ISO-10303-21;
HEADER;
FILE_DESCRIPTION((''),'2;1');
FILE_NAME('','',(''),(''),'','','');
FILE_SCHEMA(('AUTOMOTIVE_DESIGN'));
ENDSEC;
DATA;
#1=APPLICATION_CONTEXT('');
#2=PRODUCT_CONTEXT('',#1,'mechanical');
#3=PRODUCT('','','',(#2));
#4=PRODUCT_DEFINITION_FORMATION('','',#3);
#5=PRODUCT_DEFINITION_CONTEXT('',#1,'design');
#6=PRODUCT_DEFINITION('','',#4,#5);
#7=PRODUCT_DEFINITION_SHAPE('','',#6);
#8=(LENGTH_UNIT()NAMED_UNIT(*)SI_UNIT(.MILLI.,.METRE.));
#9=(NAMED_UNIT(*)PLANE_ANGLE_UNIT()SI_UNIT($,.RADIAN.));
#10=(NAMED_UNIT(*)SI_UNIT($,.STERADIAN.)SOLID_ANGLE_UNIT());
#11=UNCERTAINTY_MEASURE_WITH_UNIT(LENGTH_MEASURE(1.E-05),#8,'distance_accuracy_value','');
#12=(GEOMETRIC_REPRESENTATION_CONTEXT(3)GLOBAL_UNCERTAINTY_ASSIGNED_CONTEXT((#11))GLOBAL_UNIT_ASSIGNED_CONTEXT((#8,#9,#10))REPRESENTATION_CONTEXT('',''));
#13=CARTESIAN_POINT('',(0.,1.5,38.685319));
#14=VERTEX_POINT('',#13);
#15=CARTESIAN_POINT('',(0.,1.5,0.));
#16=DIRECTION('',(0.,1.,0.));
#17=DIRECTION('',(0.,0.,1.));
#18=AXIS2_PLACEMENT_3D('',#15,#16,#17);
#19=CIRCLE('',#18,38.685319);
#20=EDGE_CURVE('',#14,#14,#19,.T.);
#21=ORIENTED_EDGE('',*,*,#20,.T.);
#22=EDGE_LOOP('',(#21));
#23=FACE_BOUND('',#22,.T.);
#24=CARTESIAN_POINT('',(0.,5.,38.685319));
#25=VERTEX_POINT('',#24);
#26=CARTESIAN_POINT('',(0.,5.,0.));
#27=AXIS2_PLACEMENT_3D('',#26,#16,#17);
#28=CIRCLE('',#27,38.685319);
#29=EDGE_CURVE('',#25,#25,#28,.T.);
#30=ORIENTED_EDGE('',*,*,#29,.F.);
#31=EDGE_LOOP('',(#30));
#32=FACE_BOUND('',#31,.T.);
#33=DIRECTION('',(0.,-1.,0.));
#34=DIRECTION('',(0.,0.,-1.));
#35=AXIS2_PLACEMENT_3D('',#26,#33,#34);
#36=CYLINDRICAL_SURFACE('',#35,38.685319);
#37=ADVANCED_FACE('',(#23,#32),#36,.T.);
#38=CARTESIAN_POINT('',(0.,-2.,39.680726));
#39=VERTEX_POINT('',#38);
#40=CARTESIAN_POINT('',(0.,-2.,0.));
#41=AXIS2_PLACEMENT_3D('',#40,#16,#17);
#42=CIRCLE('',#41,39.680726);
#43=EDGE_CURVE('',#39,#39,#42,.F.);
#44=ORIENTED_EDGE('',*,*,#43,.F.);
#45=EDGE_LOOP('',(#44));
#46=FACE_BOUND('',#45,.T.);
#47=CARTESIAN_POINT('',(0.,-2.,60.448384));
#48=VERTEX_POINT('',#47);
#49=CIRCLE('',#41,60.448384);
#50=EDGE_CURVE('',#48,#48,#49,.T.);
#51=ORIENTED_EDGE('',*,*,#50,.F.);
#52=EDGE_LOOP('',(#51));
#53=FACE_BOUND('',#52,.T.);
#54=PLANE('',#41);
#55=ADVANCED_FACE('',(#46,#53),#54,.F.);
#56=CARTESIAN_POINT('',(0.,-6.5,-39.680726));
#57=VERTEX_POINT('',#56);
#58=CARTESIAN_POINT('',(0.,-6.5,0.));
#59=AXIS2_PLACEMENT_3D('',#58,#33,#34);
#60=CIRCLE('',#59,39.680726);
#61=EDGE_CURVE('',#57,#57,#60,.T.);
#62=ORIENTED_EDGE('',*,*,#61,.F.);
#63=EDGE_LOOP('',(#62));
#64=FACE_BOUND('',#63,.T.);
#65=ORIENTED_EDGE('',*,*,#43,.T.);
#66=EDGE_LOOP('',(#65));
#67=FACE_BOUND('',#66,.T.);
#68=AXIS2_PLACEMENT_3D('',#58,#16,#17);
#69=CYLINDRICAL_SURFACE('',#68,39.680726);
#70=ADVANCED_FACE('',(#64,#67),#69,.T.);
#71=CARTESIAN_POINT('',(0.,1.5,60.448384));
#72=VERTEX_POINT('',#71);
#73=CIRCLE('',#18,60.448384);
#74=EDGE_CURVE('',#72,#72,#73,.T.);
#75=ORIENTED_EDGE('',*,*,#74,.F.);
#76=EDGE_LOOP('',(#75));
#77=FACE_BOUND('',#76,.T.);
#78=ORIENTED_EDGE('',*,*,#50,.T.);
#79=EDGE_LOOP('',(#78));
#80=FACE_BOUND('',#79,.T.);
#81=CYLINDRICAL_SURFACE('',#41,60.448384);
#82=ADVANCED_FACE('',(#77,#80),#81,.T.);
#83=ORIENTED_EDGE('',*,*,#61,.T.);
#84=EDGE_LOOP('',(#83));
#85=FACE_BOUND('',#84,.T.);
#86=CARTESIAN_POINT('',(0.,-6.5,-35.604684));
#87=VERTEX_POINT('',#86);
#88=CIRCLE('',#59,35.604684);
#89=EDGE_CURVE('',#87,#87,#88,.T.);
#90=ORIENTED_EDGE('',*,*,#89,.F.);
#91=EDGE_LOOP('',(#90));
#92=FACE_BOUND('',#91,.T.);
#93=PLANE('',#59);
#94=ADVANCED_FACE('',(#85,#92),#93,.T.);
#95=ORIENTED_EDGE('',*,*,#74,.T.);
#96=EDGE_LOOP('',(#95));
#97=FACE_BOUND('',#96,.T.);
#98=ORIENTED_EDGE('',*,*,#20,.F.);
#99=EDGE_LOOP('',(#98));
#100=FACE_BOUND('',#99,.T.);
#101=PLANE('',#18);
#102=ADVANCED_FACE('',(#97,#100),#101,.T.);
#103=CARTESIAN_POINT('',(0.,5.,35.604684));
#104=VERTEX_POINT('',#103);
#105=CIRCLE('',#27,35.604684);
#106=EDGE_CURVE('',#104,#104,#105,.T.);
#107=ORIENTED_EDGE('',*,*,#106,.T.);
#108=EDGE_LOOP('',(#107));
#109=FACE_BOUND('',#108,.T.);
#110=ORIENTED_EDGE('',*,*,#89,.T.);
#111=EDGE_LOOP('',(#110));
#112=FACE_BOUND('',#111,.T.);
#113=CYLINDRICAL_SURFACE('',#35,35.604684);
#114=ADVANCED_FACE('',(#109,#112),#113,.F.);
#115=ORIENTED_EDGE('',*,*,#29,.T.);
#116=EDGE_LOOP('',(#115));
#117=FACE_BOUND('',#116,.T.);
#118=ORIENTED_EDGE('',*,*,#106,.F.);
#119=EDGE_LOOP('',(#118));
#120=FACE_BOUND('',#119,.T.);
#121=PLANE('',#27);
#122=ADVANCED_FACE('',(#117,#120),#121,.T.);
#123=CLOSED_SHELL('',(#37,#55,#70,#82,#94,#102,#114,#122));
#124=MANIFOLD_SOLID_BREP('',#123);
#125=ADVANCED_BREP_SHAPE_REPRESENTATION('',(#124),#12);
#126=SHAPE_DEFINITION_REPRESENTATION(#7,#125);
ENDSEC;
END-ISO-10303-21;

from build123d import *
from build123d.topology import SkipClean

# Parameters (mm, degrees)
CROQUIS1_R              = 35.597110005
CROQUIS1_R_2            = 26.191176114
SALIENTE_EXTRUIR1_DEPTH = 1.5
CROQUIS2_R              = 60.448384053
SALIENTE_EXTRUIR2_DEPTH = 3.5
CROQUIS3_R              = 38.685318644
CROQUIS3_R_2            = 35.604684405
SALIENTE_EXTRUIR3_DEPTH = 3.5
CROQUIS4_R              = 35.604684405
CORTAR_EXTRUIR1_DEPTH   = 86.558542935
CROQUIS5_R              = 39.680725698
CROQUIS5_R_2            = 35.604684405
SALIENTE_EXTRUIR4_DEPTH = 4.5


with BuildPart() as part:
    # Croquis1 → Saliente-Extruir1 (new body)
    with BuildSketch(Plane(origin=(0, 0, 0), x_dir=(1, 0, 0), z_dir=(0, 1, 0))):
        Circle(CROQUIS1_R)
        Circle(CROQUIS1_R_2, mode=Mode.SUBTRACT)
    extrude(amount=SALIENTE_EXTRUIR1_DEPTH)

    # Croquis2 → Saliente-Extruir2 (add)
    with BuildSketch(Plane(origin=(0, 1.5, 0), x_dir=(1, 0, 0), z_dir=(0, 1, 0))):
        Circle(CROQUIS2_R)
    extrude(amount=-SALIENTE_EXTRUIR2_DEPTH)

    # Croquis3 → Saliente-Extruir3 (add)
    with BuildSketch(Plane(origin=(0, 1.5, 0), x_dir=(1, 0, 0), z_dir=(0, 1, 0))):
        Circle(CROQUIS3_R)
        Circle(CROQUIS3_R_2, mode=Mode.SUBTRACT)
    extrude(amount=SALIENTE_EXTRUIR3_DEPTH)

    # Croquis4 → Cortar-Extruir1 (cut, through all)
    with BuildSketch(Plane(origin=(0, 1.5, 0), x_dir=(1, 0, 0), z_dir=(0, 1, 0))):
        Circle(CROQUIS4_R)
    extrude(amount=-CORTAR_EXTRUIR1_DEPTH, mode=Mode.SUBTRACT)

    # Croquis5 → Saliente-Extruir4 (add)
    with SkipClean():  # the faces are left unmerged after this step: merging them gives an invalid solid
        with BuildSketch(Plane(origin=(0, -2, 0), x_dir=(-1, 0, 0), z_dir=(0, -1, 0))):
            Circle(CROQUIS5_R)
            Circle(CROQUIS5_R_2, mode=Mode.SUBTRACT)
        extrude(amount=SALIENTE_EXTRUIR4_DEPTH)
    add(part.part.scale(1), mode=Mode.REPLACE)  # the faces are merged on a copy


solid = part.part
